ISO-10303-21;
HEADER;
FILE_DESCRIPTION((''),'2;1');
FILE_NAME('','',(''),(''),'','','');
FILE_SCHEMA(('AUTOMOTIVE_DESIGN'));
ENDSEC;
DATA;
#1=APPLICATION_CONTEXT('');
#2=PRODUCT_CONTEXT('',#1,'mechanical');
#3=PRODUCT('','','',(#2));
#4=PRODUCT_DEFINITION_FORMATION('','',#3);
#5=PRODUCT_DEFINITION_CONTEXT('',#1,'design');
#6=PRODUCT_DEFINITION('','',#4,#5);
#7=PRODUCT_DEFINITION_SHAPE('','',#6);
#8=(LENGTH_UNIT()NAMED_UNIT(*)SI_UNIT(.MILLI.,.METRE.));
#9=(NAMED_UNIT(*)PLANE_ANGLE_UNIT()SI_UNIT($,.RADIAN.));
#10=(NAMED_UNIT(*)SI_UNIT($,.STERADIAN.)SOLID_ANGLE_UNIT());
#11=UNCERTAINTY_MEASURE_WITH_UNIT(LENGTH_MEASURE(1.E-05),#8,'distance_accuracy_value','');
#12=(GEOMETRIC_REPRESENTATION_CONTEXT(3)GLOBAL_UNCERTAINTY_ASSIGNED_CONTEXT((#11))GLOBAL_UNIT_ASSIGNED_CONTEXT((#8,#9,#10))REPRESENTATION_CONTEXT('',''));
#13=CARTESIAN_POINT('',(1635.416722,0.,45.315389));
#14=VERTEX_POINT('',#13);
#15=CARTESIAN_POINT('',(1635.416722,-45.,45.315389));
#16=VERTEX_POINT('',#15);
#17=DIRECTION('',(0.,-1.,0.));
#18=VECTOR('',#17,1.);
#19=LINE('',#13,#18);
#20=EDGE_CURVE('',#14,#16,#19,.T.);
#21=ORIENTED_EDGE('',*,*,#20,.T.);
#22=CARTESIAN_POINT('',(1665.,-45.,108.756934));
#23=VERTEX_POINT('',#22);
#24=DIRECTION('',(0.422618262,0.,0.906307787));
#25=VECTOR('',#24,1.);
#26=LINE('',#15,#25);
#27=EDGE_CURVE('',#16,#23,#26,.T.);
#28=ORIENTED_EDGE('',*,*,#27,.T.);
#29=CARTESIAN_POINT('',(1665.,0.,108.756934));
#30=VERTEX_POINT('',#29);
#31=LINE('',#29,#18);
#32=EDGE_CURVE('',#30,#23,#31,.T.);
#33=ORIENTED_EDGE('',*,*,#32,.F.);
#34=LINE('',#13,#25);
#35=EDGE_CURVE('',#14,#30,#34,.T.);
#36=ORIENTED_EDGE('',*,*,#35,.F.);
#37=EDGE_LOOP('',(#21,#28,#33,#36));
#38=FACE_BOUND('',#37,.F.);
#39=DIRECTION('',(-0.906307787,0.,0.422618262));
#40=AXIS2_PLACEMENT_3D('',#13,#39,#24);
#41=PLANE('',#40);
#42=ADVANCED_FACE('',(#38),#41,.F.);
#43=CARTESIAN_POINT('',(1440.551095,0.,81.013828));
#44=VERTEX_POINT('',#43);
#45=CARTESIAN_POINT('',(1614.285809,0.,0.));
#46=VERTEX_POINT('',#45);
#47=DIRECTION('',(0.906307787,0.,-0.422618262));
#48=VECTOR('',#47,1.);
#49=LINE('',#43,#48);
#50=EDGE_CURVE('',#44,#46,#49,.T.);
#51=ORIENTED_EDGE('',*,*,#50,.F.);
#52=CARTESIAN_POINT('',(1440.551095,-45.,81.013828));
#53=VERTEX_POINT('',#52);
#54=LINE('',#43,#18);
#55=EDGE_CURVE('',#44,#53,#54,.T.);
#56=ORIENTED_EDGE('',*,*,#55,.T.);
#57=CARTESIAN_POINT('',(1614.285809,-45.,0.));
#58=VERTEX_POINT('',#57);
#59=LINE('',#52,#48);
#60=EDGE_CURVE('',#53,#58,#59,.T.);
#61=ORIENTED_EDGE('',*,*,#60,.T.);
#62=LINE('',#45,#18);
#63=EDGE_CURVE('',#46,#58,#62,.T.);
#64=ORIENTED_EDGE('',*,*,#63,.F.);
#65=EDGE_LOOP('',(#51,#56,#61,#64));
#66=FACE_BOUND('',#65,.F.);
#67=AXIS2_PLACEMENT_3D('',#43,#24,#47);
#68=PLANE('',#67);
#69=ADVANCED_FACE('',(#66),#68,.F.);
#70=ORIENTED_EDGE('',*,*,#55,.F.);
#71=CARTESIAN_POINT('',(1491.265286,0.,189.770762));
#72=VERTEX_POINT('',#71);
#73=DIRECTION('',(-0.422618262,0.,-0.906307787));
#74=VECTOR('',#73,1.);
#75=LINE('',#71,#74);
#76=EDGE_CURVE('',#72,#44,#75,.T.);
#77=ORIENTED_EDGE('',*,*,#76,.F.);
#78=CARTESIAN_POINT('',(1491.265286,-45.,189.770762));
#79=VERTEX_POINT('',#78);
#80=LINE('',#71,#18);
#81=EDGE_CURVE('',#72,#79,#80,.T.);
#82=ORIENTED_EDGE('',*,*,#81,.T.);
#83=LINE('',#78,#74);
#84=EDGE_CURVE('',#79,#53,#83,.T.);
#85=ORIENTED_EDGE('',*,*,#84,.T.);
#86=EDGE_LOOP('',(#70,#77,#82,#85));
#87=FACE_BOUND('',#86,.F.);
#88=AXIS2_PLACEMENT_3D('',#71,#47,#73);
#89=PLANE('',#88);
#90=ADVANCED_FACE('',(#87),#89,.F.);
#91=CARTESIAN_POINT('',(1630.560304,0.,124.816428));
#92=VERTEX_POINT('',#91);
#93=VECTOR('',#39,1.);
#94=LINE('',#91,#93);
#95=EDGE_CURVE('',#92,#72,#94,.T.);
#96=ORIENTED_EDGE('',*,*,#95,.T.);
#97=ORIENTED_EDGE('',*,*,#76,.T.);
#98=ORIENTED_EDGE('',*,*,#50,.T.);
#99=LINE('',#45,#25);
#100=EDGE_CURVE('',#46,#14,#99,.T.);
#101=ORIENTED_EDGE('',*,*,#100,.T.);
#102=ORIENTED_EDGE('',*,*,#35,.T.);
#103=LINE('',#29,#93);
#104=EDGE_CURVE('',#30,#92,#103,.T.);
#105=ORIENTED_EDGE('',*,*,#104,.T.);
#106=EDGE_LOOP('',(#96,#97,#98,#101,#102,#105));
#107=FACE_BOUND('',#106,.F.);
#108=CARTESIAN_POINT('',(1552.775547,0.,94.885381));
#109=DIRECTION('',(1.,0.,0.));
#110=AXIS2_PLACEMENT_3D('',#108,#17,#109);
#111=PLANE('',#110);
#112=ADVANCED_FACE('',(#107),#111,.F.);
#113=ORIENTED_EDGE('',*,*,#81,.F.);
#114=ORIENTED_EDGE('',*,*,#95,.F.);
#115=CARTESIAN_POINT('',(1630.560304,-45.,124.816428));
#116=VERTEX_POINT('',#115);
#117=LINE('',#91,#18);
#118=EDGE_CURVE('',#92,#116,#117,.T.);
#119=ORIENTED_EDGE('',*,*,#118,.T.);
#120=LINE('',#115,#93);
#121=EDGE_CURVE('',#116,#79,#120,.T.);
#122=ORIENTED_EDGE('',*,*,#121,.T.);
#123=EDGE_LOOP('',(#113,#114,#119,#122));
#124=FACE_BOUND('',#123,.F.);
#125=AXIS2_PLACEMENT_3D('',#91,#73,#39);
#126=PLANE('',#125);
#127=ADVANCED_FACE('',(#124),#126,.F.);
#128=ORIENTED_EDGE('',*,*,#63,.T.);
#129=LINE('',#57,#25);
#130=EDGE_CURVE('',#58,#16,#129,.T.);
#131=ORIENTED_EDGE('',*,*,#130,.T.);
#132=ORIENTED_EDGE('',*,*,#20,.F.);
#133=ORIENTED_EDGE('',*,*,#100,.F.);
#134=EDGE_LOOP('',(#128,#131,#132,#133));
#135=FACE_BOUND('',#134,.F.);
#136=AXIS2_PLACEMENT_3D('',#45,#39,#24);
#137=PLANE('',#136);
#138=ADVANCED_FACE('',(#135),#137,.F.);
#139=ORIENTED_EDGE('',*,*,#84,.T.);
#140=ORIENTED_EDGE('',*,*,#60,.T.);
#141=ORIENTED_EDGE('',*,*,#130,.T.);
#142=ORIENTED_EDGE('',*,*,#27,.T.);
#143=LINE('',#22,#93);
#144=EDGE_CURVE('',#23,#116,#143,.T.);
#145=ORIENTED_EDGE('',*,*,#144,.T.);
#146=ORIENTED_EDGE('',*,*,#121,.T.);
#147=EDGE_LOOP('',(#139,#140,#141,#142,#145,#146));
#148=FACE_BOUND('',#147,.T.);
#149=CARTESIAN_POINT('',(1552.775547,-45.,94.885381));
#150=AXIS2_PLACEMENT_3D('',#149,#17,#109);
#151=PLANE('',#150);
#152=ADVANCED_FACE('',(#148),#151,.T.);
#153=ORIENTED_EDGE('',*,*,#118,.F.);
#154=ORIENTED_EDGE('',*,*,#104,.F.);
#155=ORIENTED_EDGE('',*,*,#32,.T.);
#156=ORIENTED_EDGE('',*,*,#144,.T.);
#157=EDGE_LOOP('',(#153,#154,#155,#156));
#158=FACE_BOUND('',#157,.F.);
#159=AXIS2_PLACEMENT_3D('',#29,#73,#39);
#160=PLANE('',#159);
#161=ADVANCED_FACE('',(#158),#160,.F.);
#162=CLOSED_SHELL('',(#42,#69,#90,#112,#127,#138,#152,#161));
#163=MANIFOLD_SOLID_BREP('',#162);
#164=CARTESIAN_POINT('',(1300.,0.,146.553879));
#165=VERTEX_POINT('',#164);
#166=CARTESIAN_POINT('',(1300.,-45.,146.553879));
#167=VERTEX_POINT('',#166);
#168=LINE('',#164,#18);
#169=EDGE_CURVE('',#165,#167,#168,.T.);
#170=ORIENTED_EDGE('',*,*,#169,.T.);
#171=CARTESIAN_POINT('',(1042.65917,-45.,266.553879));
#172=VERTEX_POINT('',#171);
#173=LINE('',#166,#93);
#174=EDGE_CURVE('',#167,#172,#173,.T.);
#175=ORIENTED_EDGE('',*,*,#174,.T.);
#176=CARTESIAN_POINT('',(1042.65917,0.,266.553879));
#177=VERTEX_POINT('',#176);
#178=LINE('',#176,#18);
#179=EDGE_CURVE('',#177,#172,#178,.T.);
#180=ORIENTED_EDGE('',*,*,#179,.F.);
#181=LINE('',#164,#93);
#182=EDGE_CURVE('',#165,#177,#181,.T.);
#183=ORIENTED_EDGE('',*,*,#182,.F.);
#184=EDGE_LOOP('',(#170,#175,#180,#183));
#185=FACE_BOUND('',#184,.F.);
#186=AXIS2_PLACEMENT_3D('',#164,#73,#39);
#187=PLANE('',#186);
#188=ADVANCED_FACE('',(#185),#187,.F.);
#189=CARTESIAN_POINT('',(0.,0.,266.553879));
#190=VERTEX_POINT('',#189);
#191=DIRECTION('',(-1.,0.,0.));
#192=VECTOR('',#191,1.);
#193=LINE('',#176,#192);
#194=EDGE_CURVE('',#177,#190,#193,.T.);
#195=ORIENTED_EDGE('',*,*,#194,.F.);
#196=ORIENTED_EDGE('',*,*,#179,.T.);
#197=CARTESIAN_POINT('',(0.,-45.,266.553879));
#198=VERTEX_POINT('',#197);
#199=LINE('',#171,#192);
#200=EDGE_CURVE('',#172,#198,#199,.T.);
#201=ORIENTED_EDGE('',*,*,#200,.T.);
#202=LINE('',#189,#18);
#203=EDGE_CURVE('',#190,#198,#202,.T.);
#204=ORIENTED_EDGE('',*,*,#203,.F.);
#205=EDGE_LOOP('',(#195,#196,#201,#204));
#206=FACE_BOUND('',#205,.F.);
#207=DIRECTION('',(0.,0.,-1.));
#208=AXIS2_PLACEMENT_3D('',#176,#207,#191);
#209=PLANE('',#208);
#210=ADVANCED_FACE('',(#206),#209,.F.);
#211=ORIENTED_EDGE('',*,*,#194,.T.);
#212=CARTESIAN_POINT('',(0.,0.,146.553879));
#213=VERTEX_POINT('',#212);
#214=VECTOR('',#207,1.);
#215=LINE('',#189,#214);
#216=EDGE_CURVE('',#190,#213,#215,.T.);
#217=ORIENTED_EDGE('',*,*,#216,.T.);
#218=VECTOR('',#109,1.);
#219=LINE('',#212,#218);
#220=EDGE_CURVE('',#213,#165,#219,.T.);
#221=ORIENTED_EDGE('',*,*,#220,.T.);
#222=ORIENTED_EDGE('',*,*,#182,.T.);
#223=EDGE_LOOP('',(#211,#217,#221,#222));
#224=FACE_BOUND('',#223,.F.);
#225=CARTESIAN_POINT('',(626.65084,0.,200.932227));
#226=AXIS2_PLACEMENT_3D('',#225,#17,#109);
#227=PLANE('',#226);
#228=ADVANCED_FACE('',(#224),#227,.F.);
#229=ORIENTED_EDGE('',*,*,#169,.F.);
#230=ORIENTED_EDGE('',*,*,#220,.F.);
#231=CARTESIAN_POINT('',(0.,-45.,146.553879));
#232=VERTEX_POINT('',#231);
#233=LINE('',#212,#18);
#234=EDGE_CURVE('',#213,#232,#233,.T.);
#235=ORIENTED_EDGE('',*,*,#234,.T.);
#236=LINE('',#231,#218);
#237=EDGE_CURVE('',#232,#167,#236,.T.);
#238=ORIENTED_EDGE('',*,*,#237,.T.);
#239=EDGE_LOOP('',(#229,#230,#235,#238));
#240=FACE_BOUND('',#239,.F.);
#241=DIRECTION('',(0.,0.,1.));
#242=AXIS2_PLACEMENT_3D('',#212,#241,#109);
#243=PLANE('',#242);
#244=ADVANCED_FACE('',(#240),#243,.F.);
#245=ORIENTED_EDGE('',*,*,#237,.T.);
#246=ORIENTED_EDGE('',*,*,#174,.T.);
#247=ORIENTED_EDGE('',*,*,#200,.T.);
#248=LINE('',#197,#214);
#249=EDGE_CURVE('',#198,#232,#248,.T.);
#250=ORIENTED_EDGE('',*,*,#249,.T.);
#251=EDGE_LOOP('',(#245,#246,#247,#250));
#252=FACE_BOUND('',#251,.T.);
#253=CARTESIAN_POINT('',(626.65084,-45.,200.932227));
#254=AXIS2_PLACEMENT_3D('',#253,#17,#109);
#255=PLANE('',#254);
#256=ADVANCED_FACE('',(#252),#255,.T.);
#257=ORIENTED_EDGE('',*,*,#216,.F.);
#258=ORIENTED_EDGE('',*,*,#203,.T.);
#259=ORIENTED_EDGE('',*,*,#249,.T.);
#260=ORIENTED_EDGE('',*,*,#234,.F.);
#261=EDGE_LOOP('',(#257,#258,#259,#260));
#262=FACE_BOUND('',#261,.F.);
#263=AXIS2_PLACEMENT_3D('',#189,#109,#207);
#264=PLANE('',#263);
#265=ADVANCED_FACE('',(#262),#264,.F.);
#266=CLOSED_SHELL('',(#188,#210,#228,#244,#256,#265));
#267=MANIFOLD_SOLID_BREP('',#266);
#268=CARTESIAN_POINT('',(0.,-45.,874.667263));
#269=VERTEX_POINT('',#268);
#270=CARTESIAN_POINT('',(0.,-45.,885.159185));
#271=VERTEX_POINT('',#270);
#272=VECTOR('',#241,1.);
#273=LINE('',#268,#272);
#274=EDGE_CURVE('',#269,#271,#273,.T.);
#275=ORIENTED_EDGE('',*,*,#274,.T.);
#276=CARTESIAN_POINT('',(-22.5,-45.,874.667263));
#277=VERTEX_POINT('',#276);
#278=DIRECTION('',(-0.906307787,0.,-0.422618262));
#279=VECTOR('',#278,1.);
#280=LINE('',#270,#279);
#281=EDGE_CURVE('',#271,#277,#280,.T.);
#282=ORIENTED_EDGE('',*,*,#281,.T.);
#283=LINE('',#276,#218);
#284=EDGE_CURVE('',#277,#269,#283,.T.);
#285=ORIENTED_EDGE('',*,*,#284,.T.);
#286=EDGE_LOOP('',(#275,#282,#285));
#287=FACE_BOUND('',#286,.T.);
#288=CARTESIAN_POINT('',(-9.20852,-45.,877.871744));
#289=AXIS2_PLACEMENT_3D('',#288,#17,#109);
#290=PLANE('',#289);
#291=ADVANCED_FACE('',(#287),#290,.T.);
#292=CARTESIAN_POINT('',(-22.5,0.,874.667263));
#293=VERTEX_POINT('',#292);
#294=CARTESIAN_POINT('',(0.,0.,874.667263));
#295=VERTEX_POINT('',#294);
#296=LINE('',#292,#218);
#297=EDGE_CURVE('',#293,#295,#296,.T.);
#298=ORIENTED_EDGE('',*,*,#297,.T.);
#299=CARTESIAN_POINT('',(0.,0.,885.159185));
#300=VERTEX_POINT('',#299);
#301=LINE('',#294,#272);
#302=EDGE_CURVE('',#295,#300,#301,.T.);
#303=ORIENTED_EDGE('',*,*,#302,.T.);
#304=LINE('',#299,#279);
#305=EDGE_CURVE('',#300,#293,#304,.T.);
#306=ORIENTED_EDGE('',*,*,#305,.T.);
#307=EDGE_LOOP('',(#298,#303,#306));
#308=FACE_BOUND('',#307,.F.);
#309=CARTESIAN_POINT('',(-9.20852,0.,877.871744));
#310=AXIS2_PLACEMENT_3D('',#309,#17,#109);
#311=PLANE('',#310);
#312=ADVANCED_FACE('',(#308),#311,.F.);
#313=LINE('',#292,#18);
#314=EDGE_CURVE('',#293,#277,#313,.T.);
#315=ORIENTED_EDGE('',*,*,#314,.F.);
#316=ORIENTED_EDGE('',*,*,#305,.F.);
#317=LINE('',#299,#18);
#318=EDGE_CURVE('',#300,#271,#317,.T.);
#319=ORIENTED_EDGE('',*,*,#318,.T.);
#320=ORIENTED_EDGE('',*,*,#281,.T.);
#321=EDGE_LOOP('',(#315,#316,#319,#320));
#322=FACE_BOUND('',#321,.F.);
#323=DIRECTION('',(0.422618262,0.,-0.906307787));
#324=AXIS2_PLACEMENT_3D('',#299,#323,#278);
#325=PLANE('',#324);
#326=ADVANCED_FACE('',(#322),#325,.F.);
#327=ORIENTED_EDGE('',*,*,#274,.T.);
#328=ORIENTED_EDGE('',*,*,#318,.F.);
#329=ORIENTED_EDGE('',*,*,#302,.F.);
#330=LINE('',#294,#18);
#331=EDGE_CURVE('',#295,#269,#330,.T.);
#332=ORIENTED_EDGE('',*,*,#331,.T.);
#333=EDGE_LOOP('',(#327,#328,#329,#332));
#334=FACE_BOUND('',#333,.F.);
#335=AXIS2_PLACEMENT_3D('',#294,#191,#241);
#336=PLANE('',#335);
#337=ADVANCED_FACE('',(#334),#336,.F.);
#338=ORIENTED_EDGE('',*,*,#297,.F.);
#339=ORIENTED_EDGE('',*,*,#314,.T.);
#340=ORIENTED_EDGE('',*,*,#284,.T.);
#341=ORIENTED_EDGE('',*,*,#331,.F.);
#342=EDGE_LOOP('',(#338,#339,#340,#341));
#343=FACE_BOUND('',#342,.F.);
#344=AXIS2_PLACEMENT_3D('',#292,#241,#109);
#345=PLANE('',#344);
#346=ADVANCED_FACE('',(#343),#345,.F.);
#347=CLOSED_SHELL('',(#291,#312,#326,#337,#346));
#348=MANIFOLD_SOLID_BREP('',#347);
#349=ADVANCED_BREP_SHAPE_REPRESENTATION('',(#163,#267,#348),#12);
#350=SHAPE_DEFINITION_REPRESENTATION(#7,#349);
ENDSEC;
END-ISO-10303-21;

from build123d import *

# Parameters (mm, degrees)
F1_DEPTH = 45


# Not quite as in the source:
# - a feature names something its author has since deleted; it is built from what else it names


with BuildPart() as f1:
    # F0 (on Front) → F1 (new body)
    with BuildSketch(Plane.XZ):
        Polygon((1440.5510948329, 81.0138275128), (1614.2858085911, 0), (1635.4167216782, 45.3153893518), (1665, 108.7569344444), (1630.5603040926, 124.8164283905), (1491.2652862418, 189.7707619572), align=None)
    extrude(amount=F1_DEPTH)


with BuildPart() as f1b:
    # F0 (on Front) → F1, piece 2 (new body)
    with BuildSketch(Plane.XZ):
        Polygon((1210, 146.5538793955), (1300, 146.5538793955), (1042.6591695389, 266.5538793955), (0, 266.5538793955), (0, 146.5538793955), align=None)
    extrude(amount=F1_DEPTH)


with BuildPart() as f1c:
    # F0 (on Front) → F1, piece 3 (new body)
    with BuildSketch(Plane.XZ):
        Polygon((-22.5, 874.667262964), (0, 874.667262964), (0, 885.1591852725), align=None)
    extrude(amount=F1_DEPTH)


solid = Compound([f1.part, f1b.part, f1c.part])
